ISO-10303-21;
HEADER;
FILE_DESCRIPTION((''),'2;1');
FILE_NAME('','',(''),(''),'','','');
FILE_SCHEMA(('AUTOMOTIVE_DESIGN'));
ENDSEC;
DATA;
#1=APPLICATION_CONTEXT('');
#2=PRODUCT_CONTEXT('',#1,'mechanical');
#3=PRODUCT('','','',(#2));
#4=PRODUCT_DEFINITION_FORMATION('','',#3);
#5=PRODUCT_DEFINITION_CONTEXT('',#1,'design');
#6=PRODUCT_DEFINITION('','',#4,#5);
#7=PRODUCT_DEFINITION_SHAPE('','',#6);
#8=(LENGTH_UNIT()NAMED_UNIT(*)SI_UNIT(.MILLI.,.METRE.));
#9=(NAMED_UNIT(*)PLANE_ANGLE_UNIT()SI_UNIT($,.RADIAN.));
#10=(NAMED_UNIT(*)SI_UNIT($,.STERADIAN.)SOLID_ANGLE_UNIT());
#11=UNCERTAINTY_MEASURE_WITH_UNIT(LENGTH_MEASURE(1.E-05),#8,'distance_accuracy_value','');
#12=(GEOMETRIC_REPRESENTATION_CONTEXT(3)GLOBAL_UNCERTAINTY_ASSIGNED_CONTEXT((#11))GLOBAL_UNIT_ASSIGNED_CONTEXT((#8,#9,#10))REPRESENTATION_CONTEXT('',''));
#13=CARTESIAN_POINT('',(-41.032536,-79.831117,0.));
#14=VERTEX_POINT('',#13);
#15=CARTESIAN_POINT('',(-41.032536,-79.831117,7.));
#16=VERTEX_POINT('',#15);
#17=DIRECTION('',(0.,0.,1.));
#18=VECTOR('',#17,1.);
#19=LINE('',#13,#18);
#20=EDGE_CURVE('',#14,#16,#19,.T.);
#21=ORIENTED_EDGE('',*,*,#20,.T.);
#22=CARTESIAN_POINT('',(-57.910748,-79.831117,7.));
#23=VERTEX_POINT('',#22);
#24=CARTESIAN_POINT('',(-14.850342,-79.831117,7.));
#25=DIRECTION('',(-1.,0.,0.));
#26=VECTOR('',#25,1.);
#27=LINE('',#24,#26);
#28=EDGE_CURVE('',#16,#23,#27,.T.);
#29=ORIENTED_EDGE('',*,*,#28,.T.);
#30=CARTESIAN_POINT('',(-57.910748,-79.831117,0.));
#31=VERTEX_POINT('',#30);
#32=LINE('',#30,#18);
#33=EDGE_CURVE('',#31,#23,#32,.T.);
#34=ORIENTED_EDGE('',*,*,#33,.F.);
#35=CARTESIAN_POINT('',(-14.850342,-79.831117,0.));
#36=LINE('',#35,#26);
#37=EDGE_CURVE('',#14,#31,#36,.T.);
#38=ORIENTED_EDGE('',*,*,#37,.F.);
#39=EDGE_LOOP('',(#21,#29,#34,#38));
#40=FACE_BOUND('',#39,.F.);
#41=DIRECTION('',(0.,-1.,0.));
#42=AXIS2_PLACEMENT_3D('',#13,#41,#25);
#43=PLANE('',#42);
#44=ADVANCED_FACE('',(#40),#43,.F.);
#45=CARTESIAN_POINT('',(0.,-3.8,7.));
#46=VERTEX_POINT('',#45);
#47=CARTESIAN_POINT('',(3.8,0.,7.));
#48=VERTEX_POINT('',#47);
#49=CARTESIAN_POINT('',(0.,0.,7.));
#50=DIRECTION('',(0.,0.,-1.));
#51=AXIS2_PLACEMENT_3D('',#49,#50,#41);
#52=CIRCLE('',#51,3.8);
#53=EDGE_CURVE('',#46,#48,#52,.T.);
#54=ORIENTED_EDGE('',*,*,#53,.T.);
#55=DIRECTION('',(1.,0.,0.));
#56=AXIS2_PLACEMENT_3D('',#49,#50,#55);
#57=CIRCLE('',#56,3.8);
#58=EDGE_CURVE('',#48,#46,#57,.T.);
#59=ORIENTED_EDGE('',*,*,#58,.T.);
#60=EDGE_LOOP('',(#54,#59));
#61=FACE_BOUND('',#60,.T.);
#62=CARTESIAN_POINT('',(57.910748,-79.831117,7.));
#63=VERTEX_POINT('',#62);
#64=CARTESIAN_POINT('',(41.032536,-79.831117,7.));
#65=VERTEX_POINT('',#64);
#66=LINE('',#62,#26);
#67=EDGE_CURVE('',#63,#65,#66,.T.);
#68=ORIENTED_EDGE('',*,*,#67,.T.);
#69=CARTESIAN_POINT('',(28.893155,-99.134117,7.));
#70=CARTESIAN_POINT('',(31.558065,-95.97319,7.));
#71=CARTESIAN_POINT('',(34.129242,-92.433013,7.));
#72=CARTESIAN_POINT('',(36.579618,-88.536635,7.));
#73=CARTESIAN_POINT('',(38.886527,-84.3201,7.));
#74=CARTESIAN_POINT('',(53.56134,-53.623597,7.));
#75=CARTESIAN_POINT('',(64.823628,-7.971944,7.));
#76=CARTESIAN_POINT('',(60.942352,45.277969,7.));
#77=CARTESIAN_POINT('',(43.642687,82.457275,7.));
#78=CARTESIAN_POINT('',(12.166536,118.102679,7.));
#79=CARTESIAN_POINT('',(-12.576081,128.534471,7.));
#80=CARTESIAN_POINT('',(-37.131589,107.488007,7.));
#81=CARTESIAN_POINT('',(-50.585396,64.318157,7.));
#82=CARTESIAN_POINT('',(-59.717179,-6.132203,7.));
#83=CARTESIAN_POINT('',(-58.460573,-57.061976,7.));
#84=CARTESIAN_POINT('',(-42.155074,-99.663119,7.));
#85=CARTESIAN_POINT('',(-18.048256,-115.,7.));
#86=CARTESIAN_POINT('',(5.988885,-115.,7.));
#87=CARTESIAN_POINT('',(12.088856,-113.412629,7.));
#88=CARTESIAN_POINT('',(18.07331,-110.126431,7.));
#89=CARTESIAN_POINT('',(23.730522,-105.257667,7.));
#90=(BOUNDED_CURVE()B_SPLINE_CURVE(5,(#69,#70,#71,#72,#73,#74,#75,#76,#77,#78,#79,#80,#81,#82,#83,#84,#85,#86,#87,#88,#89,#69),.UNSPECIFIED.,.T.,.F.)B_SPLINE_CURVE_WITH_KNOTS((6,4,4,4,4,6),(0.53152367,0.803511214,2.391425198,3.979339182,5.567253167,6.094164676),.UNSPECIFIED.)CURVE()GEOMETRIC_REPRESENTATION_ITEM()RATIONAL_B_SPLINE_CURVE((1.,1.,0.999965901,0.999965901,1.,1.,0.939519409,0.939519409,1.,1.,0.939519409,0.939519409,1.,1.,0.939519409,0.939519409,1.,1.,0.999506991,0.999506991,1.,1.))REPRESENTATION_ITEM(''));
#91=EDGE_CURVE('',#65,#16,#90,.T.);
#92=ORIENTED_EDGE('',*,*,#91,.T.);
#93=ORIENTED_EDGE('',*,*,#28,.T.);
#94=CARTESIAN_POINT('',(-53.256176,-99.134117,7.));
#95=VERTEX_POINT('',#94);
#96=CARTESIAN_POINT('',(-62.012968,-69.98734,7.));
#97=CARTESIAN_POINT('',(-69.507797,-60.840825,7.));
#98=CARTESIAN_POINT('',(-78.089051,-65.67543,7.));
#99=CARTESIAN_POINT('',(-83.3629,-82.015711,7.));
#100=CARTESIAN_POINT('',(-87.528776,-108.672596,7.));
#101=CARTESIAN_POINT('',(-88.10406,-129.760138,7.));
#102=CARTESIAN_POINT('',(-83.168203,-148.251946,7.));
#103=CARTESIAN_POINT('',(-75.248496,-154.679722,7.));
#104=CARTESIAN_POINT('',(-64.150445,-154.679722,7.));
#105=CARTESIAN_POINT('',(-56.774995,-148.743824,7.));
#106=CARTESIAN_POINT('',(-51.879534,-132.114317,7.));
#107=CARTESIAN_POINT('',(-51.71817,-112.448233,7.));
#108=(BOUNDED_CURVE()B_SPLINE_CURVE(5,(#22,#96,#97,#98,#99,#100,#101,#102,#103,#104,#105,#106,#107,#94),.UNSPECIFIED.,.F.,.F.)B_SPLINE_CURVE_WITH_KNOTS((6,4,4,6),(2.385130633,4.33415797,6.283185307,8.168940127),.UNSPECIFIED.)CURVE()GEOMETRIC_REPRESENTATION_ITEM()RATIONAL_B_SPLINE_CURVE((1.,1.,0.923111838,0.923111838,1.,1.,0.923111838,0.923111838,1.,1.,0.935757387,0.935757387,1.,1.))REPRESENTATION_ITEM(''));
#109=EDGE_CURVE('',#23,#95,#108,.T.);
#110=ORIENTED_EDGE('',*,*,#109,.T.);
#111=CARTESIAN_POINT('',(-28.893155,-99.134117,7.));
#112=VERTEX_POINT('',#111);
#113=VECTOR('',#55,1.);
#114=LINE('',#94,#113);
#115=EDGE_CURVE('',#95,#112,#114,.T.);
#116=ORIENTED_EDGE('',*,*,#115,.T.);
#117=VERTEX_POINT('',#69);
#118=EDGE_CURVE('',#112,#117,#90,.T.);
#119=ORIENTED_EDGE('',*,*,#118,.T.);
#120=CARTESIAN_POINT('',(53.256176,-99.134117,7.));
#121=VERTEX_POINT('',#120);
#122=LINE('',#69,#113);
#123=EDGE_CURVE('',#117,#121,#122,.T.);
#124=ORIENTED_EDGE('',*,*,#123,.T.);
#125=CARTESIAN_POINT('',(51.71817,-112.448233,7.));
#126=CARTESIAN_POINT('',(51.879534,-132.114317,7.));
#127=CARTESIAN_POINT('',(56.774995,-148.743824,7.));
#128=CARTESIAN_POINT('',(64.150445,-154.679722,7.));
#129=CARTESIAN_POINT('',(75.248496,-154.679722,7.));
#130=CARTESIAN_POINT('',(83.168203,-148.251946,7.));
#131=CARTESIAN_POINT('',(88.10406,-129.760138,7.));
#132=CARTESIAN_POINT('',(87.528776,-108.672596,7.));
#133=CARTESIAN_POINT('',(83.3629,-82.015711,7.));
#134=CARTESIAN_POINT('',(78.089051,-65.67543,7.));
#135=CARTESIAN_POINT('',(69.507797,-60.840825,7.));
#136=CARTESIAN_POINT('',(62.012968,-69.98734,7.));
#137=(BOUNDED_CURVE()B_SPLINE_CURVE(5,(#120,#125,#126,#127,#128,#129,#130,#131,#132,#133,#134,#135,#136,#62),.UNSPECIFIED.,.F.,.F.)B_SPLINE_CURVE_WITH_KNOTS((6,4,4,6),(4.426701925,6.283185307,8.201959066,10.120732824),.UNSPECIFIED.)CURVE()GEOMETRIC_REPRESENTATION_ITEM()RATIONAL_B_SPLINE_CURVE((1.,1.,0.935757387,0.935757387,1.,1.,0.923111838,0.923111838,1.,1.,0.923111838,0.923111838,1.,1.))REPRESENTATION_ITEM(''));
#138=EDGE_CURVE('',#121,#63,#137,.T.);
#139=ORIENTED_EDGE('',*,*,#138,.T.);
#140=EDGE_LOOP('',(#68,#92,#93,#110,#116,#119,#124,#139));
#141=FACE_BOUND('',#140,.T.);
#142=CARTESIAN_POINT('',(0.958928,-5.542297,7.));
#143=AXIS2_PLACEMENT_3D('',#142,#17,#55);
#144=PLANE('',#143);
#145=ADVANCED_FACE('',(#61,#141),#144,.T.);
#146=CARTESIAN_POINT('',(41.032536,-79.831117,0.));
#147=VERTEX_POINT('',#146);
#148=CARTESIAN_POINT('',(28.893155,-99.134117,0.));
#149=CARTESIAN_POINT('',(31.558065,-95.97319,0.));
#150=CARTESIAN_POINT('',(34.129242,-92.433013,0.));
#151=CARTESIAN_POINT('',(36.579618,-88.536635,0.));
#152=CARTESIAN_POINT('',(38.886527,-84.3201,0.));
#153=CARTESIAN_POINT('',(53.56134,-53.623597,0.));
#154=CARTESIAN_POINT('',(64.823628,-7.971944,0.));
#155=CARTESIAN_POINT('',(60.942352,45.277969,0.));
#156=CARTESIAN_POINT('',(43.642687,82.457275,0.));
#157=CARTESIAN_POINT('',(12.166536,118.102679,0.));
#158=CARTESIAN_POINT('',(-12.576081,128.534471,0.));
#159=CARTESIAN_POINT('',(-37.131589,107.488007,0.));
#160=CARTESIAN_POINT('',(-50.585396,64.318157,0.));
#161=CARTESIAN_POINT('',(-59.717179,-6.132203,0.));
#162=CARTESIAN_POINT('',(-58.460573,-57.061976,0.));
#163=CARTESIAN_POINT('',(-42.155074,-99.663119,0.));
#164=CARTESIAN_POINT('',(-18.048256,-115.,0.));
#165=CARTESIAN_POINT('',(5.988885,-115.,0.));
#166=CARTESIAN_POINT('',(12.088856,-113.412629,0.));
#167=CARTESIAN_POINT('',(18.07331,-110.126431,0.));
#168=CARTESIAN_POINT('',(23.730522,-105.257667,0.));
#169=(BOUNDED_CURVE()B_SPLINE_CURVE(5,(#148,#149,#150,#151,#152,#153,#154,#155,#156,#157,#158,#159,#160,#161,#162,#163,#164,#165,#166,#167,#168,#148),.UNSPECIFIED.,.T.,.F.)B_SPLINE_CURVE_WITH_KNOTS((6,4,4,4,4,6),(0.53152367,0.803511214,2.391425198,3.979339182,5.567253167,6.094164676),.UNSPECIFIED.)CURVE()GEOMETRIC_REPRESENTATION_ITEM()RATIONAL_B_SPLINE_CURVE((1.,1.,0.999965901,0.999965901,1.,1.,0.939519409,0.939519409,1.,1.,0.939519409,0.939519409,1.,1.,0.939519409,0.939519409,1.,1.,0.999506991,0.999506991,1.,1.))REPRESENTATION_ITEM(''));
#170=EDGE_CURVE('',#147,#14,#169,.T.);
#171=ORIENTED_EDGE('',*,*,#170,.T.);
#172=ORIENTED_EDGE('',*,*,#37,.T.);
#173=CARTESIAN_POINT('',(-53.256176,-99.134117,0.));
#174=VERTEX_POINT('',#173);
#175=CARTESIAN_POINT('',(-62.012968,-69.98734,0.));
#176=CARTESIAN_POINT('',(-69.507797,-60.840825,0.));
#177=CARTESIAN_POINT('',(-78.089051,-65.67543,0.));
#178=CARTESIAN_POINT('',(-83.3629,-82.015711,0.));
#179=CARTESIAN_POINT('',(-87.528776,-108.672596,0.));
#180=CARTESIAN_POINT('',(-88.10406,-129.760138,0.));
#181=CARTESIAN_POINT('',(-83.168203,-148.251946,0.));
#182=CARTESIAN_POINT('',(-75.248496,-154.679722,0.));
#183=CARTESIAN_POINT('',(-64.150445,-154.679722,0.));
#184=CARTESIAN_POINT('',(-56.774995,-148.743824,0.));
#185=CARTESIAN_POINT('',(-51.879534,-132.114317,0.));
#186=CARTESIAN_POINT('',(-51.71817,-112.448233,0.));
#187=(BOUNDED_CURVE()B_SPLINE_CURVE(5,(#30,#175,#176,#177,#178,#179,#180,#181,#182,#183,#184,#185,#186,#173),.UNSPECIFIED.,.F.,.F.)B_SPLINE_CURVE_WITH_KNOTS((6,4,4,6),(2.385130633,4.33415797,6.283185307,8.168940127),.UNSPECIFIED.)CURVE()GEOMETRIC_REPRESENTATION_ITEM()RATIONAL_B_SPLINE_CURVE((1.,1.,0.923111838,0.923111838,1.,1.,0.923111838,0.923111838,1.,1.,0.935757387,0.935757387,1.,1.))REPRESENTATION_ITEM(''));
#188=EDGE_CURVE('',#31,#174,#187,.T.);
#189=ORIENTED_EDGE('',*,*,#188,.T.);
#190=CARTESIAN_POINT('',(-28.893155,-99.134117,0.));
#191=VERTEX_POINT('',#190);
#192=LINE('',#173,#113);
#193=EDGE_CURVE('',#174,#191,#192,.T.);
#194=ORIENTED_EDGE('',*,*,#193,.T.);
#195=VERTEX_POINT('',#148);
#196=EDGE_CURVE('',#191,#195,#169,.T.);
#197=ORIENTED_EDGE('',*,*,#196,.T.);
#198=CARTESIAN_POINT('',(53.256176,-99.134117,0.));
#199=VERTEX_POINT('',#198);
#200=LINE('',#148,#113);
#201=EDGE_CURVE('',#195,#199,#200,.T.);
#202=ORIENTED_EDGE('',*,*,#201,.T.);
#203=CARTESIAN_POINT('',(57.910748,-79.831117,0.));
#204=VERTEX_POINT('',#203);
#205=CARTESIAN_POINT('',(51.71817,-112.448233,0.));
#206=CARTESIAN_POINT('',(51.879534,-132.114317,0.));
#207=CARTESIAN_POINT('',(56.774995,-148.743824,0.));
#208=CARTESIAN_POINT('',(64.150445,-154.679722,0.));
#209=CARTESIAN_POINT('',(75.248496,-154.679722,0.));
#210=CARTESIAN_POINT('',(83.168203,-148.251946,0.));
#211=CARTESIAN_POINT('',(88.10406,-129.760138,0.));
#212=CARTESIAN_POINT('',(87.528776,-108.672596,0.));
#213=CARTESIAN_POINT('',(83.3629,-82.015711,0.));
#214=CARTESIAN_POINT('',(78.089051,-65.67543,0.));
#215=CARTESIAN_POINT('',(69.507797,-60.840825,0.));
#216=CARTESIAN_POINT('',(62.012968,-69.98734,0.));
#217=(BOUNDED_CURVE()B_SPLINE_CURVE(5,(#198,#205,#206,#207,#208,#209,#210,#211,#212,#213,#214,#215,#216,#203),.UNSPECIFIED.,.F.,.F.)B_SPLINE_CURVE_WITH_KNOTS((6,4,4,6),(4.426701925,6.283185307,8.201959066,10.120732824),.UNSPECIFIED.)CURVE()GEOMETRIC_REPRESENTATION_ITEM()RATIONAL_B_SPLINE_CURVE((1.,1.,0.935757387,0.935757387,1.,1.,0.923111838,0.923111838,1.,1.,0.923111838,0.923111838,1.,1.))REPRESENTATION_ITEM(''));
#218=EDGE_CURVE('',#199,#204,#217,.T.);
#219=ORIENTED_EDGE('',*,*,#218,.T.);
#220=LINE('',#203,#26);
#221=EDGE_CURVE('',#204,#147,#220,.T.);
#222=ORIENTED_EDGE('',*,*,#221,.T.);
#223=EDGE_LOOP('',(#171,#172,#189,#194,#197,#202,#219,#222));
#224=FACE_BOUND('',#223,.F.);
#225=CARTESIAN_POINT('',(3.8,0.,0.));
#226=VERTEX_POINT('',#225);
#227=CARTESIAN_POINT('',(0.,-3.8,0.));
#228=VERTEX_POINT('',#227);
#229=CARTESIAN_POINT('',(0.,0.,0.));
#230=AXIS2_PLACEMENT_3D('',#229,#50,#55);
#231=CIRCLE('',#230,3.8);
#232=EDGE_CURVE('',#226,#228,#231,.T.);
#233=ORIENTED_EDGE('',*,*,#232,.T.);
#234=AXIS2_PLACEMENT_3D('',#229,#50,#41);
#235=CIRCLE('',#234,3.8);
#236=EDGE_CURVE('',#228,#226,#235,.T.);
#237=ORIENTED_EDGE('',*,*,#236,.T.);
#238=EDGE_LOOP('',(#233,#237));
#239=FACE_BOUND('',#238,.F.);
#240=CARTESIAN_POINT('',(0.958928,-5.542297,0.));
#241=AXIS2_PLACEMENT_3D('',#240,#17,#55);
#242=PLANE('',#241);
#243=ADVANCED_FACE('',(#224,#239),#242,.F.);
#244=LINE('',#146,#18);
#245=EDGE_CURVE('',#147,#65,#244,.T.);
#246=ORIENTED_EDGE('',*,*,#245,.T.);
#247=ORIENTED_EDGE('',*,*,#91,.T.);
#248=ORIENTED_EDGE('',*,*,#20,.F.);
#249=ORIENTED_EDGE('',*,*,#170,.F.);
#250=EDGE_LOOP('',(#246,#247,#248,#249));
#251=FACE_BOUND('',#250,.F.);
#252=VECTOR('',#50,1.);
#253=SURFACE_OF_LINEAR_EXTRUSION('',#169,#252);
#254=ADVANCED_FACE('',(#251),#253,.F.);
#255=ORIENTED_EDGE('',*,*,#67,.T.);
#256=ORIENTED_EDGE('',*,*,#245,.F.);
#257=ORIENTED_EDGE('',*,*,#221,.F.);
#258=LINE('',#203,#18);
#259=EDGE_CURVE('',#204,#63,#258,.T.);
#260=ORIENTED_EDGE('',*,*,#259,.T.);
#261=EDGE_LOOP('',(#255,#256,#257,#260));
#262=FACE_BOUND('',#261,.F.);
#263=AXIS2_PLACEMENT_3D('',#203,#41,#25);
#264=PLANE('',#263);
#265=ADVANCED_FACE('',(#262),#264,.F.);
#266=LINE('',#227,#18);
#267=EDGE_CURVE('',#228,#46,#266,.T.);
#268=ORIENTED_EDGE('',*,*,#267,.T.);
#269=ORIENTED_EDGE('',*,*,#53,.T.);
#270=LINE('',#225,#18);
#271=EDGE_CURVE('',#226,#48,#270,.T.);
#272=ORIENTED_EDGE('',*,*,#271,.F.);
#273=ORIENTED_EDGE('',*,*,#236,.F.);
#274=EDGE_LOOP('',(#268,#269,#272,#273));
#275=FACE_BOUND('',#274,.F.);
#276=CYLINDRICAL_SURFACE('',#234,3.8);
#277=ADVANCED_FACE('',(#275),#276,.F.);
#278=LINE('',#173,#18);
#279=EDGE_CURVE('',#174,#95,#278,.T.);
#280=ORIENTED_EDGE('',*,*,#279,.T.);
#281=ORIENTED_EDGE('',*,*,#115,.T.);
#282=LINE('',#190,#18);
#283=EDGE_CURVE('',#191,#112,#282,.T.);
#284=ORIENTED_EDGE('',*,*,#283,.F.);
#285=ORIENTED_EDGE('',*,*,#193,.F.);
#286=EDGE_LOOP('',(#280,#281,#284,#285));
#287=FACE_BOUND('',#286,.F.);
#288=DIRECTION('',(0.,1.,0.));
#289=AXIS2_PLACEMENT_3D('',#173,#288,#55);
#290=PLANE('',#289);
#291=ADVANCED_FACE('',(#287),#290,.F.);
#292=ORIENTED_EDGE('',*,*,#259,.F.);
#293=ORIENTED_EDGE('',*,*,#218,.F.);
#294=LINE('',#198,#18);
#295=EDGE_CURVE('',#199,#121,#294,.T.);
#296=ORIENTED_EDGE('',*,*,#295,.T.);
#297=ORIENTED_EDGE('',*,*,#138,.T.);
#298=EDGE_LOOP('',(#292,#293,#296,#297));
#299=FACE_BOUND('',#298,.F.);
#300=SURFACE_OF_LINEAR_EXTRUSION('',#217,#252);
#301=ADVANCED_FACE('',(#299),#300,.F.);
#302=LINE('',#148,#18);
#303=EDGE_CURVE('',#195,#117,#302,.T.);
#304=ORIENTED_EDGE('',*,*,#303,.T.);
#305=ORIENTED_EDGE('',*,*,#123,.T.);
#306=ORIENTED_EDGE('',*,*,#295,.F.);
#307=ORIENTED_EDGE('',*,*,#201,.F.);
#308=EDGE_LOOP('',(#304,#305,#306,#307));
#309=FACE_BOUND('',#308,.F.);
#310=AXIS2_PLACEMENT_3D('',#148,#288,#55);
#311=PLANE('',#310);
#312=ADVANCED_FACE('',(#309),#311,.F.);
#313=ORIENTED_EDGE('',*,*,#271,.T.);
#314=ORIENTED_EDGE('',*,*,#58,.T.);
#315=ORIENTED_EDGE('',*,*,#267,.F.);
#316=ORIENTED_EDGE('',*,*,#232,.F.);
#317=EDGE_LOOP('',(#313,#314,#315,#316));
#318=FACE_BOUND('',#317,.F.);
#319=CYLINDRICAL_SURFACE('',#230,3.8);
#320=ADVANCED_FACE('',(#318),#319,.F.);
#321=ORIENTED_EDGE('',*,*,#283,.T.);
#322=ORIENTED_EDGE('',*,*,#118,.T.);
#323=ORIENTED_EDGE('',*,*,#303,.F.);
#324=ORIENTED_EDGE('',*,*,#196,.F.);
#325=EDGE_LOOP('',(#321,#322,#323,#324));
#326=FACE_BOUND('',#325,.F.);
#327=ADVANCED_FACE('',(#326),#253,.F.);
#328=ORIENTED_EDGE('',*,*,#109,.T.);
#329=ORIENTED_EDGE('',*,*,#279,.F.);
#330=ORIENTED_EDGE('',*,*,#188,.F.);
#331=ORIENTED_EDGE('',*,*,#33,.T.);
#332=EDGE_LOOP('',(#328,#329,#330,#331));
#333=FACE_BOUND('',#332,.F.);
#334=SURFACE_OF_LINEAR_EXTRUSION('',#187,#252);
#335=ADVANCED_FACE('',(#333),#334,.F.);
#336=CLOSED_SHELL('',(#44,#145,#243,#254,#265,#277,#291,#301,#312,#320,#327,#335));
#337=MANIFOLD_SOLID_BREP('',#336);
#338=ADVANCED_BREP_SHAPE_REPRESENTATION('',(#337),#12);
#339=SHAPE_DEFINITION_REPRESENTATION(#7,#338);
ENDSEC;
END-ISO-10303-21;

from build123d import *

# Parameters (mm, degrees)
F1_DEPTH = 7


with BuildPart() as f1:
    # F0 (on Top) → F1 (new body)
    with BuildSketch(Plane.XY):
        with BuildLine():
            add(Edge.make_bspline(
                [(41.0325361716, -79.8311173649), (92.2831646624, 27.3740003908), (27.9046112087, 100.2799772001), (-36.473942245, 173.1859540094), (-55.1512876885, 29.0929770047), (-73.8286331319, -115), (0, -115)],
                knots=[0.8035112137, 0.8035112137, 0.8035112137, 2.6300692449, 2.6300692449, 4.456627276, 4.456627276, 6.2831853072, 6.2831853072, 6.2831853072], degree=2, weights=[1, 0.6111536596, 1, 0.6111536596, 1, 0.6111536596, 1]))
            add(Edge.make_bspline(
                [(0, -115), (15.5169707114, -115), (28.8931550214, -99.1341173649)],
                knots=[0, 0, 0, 0.5315236702, 0.5315236702, 0.5315236702], degree=2, weights=[1, 0.9648926892, 1]))
            Line((28.8931550214, -99.1341173649), (14.8503418565, -99.1341173649))
            Line((14.8503418565, -99.1341173649), (14.8503418565, -79.8311173649))
            Line((14.8503418565, -79.8311173649), (41.0325361716, -79.8311173649))
        make_face()
        with BuildLine():
            ThreePointArc((3.8, 0), (2.6870057685, -2.6870057685), (0, -3.8))
            ThreePointArc((0, -3.8), (-2.6870057685, 2.6870057685), (3.8, 0))
        make_face(mode=Mode.SUBTRACT)
        with BuildLine():
            Line((14.8503418565, -99.1341173649), (28.8931550214, -99.1341173649))
            add(Edge.make_bspline(
                [(28.8931550214, -99.1341173649), (35.6175159706, -91.1581565719), (41.0325361716, -79.8311173649)],
                knots=[0.5315236702, 0.5315236702, 0.5315236702, 0.8035112137, 0.8035112137, 0.8035112137], degree=2, weights=[1, 0.9907670899, 1]))
            Line((41.0325361716, -79.8311173649), (14.8503418565, -79.8311173649))
            Line((14.8503418565, -79.8311173649), (14.8503418565, -99.1341173649))
        make_face()
        with BuildLine():
            add(Edge.make_bspline(
                [(28.8931550214, -99.1341173649), (35.6175159706, -91.1581565719), (41.0325361716, -79.8311173649)],
                knots=[0.5315236702, 0.5315236702, 0.5315236702, 0.8035112137, 0.8035112137, 0.8035112137], degree=2, weights=[1, 0.9907670899, 1]))
            Line((28.8931550214, -99.1341173649), (53.2561757529, -99.1341173649))
            add(Edge.make_bspline(
                [(57.9107478758, -79.8311173649), (54.5561014443, -87.8810002796), (53.2561757529, -99.1341173649)],
                knots=[3.8980546745, 3.8980546745, 3.8980546745, 4.4267019246, 4.4267019246, 4.4267019246], degree=2, weights=[1, 0.965269429, 1]))
            Line((57.9107478758, -79.8311173649), (41.0325361716, -79.8311173649))
        make_face()
        with BuildLine():
            Line((66.8503418565, -99.1341173649), (53.2561757529, -99.1341173649))
            add(Edge.make_bspline(
                [(53.2561757529, -99.1341173649), (46.8397172233, -154.6797224603), (69.6079134941, -154.6797224603)],
                knots=[4.4267019246, 4.4267019246, 4.4267019246, 6.2831853072, 6.2831853072, 6.2831853072], degree=2, weights=[1, 0.5992425527, 1]))
            add(Edge.make_bspline(
                [(69.6079134941, -154.6797224603), (94.7186627471, -154.6797224603), (85.4458382886, -95.3441536003), (76.1730138301, -36.0085847403), (57.9107478758, -79.8311173649)],
                knots=[0, 0, 0, 1.9490273372, 1.9490273372, 3.8980546745, 3.8980546745, 3.8980546745], degree=2, weights=[1, 0.5615705246, 1, 0.5615705246, 1]))
            Line((57.9107478758, -79.8311173649), (66.8503418565, -79.8311173649))
            Line((66.8503418565, -79.8311173649), (66.8503418565, -99.1341173649))
        make_face()
        with BuildLine():
            add(Edge.make_bspline(
                [(57.9107478758, -79.8311173649), (54.5561014443, -87.8810002796), (53.2561757529, -99.1341173649)],
                knots=[3.8980546745, 3.8980546745, 3.8980546745, 4.4267019246, 4.4267019246, 4.4267019246], degree=2, weights=[1, 0.965269429, 1]))
            Line((53.2561757529, -99.1341173649), (66.8503418565, -99.1341173649))
            Line((66.8503418565, -99.1341173649), (66.8503418565, -79.8311173649))
            Line((66.8503418565, -79.8311173649), (57.9107478758, -79.8311173649))
        make_face()
        with BuildLine():
            add(Edge.make_bspline(
                [(-57.9107478758, -79.8311173649), (-76.1730138301, -36.0085847403), (-85.4458382886, -95.3441536003), (-94.7186627471, -154.6797224603), (-69.6079134941, -154.6797224603)],
                knots=[2.3851306327, 2.3851306327, 2.3851306327, 4.3341579699, 4.3341579699, 6.2831853072, 6.2831853072, 6.2831853072], degree=2, weights=[1, 0.5615705246, 1, 0.5615705246, 1]))
            add(Edge.make_bspline(
                [(-69.6079134941, -154.6797224603), (-46.8397172233, -154.6797224603), (-53.2561757529, -99.1341173649)],
                knots=[0, 0, 0, 1.8564833826, 1.8564833826, 1.8564833826], degree=2, weights=[1, 0.5992425527, 1]))
            Line((-53.2561757529, -99.1341173649), (-66.8503418565, -99.1341173649))
            Line((-66.8503418565, -99.1341173649), (-66.8503418565, -79.8311173649))
            Line((-66.8503418565, -79.8311173649), (-57.9107478758, -79.8311173649))
        make_face()
        with BuildLine():
            Line((-66.8503418565, -99.1341173649), (-53.2561757529, -99.1341173649))
            add(Edge.make_bspline(
                [(-53.2561757529, -99.1341173649), (-54.5561014443, -87.8810002796), (-57.9107478758, -79.8311173649)],
                knots=[1.8564833826, 1.8564833826, 1.8564833826, 2.3851306327, 2.3851306327, 2.3851306327], degree=2, weights=[1, 0.965269429, 1]))
            Line((-57.9107478758, -79.8311173649), (-66.8503418565, -79.8311173649))
            Line((-66.8503418565, -79.8311173649), (-66.8503418565, -99.1341173649))
        make_face()
        with BuildLine():
            add(Edge.make_bspline(
                [(-53.2561757529, -99.1341173649), (-54.5561014443, -87.8810002796), (-57.9107478758, -79.8311173649)],
                knots=[1.8564833826, 1.8564833826, 1.8564833826, 2.3851306327, 2.3851306327, 2.3851306327], degree=2, weights=[1, 0.965269429, 1]))
            Line((-53.2561757529, -99.1341173649), (-14.8503418565, -99.1341173649))
            Line((-14.8503418565, -99.1341173649), (-14.8503418565, -79.8311173649))
            Line((-14.8503418565, -79.8311173649), (-57.9107478758, -79.8311173649))
        make_face()
    extrude(amount=F1_DEPTH)


solid = f1.part
